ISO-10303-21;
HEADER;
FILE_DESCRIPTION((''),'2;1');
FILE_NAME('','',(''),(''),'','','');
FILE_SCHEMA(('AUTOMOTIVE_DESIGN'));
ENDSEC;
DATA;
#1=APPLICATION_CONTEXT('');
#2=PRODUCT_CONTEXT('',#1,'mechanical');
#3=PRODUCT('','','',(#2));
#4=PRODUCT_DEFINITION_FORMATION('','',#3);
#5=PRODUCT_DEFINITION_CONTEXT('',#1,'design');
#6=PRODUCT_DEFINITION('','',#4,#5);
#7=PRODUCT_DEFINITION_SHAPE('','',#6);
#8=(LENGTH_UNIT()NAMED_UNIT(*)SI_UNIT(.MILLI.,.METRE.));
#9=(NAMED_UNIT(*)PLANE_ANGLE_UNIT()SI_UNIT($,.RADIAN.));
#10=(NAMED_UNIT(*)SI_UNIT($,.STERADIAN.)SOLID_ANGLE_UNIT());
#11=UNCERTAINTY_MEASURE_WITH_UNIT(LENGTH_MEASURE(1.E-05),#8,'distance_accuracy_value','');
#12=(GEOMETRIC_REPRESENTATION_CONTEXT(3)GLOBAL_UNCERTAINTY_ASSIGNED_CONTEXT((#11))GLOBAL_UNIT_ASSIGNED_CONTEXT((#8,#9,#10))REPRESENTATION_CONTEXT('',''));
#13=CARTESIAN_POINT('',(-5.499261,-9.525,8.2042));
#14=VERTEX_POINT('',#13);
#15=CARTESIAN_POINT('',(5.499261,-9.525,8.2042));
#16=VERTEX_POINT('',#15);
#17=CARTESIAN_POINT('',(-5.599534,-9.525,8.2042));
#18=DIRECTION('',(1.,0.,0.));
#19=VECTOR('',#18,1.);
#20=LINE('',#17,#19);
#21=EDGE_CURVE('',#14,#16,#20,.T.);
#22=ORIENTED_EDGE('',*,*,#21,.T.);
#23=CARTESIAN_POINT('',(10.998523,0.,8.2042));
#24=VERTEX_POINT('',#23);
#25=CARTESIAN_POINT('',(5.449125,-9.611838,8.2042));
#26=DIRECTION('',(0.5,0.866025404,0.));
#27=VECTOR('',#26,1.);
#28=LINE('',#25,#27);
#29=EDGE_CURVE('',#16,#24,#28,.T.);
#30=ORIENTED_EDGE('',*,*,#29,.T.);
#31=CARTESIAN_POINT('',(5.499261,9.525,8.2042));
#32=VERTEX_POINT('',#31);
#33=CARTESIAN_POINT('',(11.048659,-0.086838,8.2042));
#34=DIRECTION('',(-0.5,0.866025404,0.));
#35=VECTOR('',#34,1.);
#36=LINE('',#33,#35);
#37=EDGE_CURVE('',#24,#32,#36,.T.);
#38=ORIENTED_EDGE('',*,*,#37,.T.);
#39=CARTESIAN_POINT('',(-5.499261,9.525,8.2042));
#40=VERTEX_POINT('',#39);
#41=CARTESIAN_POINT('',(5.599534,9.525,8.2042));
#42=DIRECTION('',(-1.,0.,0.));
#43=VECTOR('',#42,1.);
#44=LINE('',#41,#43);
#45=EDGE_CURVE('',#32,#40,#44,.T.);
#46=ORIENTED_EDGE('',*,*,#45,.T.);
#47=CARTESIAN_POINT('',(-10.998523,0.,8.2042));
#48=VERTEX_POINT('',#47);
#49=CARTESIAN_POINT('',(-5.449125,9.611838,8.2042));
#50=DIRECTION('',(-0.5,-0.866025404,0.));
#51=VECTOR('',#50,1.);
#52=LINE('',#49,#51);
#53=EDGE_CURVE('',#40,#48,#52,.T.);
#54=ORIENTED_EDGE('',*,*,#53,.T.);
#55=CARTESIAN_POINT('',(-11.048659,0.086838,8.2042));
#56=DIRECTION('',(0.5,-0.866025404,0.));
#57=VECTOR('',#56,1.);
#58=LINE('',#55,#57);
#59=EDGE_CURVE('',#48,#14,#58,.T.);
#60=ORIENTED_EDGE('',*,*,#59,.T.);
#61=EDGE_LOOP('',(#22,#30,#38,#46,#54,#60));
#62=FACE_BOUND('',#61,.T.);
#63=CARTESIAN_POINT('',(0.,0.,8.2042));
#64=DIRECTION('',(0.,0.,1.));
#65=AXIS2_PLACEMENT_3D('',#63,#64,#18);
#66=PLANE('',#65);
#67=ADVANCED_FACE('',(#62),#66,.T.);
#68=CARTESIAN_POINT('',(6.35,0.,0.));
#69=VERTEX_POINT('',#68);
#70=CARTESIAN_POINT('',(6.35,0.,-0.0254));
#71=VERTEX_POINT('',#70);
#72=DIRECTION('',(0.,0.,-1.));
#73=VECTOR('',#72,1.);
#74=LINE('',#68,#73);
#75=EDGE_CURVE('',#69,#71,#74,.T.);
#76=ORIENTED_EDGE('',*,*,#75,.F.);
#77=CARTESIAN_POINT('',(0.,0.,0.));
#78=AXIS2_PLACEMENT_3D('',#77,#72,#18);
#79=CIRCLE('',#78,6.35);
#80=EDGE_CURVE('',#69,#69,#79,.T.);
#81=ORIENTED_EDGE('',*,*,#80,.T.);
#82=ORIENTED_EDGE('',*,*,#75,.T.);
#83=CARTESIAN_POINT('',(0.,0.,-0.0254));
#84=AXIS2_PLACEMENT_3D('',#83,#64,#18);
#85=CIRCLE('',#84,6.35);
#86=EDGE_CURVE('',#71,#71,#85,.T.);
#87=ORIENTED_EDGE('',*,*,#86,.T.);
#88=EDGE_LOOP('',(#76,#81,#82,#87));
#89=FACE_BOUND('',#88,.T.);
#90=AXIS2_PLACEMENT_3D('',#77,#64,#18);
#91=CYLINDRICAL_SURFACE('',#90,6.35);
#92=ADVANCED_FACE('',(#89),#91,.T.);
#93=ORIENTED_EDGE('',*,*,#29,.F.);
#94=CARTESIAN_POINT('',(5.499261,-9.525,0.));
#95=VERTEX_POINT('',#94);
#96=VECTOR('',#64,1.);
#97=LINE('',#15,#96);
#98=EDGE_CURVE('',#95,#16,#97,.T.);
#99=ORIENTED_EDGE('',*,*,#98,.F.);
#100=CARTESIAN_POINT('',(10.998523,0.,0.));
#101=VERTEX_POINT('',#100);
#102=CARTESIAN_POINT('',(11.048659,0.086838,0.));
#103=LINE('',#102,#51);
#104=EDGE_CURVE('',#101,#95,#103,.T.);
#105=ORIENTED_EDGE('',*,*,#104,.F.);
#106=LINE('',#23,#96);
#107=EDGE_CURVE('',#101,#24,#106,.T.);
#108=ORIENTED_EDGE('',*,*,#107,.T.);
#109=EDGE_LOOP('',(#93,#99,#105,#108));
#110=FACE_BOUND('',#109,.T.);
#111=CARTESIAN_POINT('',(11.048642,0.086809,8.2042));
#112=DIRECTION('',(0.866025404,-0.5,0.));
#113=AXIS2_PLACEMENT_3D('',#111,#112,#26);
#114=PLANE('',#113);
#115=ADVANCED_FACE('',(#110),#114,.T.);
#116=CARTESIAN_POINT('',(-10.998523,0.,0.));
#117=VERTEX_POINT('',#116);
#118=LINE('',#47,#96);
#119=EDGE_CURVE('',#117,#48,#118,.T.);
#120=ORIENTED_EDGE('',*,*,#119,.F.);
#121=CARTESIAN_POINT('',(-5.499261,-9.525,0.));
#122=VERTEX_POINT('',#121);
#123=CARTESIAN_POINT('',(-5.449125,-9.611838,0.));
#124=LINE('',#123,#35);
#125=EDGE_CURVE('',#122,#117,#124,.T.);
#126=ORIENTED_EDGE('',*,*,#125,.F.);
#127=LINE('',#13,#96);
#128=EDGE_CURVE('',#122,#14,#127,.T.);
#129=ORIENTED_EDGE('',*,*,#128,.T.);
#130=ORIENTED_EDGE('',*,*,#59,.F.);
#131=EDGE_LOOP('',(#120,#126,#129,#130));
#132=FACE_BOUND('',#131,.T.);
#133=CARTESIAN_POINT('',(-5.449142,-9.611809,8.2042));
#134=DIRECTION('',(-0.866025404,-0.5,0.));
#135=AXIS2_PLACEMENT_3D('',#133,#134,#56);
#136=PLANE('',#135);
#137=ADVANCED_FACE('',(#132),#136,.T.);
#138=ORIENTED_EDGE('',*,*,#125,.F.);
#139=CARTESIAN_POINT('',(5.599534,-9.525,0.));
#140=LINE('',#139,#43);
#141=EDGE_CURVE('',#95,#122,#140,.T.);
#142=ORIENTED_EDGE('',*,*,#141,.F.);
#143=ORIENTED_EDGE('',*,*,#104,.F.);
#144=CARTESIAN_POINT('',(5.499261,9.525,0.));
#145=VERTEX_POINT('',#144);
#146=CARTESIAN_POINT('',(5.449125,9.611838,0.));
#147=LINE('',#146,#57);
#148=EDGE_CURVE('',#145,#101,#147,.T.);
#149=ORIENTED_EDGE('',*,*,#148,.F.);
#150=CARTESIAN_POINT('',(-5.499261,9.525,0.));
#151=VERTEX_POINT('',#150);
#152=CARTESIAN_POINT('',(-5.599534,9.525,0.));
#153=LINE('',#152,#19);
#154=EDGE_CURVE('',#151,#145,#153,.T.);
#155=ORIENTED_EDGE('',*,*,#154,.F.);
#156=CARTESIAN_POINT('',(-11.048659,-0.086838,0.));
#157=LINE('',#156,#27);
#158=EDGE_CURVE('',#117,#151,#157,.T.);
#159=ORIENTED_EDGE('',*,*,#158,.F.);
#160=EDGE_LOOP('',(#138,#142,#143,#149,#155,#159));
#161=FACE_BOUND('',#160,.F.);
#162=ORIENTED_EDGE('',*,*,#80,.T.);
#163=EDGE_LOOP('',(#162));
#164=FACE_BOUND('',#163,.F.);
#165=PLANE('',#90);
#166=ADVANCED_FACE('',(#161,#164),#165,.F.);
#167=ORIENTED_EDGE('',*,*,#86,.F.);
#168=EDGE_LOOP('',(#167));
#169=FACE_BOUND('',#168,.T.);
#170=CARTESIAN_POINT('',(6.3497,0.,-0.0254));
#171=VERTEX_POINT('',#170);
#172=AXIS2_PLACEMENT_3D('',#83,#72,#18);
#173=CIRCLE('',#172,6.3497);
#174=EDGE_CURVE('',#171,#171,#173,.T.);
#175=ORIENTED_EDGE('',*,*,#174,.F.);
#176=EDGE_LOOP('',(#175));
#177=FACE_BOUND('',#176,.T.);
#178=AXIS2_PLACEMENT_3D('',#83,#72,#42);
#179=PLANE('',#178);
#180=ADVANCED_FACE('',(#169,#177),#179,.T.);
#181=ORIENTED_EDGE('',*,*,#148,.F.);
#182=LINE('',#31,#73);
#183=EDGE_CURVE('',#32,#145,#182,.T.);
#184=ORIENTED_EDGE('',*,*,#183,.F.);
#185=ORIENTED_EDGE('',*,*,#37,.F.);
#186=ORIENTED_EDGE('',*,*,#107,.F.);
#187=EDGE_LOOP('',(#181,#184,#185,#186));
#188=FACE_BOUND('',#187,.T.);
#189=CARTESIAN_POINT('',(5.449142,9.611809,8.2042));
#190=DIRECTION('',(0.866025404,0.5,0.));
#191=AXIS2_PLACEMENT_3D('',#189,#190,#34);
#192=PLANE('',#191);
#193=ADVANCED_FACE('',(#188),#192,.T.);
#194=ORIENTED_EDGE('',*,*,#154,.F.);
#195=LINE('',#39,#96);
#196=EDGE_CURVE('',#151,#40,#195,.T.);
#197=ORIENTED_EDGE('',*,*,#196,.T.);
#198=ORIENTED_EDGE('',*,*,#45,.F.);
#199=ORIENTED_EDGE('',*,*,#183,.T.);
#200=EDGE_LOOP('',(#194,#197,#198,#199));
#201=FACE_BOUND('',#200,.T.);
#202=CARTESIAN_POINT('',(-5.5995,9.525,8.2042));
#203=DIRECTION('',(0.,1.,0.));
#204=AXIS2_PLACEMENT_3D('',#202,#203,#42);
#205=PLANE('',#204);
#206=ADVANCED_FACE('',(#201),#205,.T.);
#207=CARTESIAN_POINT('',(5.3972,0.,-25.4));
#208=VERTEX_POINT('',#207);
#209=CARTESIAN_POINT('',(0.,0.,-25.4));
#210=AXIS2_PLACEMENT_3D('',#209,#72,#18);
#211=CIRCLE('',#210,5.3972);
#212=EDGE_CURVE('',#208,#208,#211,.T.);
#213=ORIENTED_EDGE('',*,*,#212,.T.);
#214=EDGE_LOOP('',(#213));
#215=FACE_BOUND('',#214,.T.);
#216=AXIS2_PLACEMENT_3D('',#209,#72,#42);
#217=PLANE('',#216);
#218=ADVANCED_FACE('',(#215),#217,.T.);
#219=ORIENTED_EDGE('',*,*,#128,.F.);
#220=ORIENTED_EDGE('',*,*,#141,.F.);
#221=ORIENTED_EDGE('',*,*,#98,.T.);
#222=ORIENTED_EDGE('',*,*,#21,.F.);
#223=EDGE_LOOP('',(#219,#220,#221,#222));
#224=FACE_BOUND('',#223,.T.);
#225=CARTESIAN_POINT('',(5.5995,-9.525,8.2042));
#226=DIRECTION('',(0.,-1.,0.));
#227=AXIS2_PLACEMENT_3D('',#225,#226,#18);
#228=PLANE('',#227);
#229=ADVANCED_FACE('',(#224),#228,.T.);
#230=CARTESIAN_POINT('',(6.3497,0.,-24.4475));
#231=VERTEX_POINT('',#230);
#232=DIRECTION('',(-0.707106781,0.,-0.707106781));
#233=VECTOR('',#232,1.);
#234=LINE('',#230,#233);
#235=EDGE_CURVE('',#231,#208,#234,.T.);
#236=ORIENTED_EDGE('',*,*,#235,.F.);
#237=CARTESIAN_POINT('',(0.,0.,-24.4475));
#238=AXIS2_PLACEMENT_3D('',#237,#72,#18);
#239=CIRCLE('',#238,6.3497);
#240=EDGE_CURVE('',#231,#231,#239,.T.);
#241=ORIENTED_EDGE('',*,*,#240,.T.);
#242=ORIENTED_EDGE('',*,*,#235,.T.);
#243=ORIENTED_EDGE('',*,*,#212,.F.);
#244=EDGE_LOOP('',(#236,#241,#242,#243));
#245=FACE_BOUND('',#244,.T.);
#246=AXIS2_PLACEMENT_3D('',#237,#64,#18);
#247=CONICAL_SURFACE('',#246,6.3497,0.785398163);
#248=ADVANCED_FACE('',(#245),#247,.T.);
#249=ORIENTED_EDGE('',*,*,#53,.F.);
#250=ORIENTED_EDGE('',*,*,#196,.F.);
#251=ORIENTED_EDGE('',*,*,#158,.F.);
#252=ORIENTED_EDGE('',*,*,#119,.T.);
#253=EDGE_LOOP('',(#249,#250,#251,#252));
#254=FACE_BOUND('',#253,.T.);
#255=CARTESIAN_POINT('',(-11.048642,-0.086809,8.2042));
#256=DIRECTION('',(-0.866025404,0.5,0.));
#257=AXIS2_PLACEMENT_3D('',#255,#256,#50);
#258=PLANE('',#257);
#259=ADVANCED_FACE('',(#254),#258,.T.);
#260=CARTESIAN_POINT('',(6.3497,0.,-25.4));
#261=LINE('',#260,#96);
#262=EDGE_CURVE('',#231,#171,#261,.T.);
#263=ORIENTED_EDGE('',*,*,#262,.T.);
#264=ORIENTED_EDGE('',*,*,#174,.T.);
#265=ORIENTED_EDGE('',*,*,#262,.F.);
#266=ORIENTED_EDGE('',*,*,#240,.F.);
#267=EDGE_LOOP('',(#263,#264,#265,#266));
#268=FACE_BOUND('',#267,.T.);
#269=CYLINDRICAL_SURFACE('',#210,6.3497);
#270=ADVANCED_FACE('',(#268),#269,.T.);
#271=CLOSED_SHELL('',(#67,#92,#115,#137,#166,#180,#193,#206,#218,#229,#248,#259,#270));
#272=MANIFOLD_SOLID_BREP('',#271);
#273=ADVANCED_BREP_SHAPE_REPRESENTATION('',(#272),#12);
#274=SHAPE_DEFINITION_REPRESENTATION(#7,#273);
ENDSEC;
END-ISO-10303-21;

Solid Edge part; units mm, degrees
sketch "Sketch1" plane through (0, 0, 0) normal (0, 0, 1) x (1, 0, 0)
  circle A0 centre (0, 0) radius 11.049
  dimension "D1" = 22.098
extrude "Protrusion1" add sketch "Sketch1" along normal blind 8.2042
sketch "Sketch2" plane through (0, 0, 0) normal (0, 0, -1) x (1, 0, 0)
  circle A0 centre (0, 0) radius 6.35
extrude "Protrusion2" add sketch "Sketch2" along normal blind 25.4
sketch "Sketch3" plane through (0, 0, -25.4) normal (0, 0, -1) x (1, 0, 0)
  circle A0 centre (0, 0) radius 6.3497
extrude "Cutout1" cut sketch "Sketch3" against normal blind 25.3746 flip side to cut
chamfer "Chamfer_1" distance 0.9525 angle 45 1 edges at (-6.3497, 0, -25.4)
sketch "Sketch4" plane through (0, 0, 8.2042) normal (0, 0, 1) x (1, 0, 0)
  line L0 (-5.5995, 9.525) -> (5.5995, 9.525)
  dimension "D1" = 19.05
extrude "Cutout2" cut sketch "Sketch4" against normal up to next material side at (0, 9.575, 8.2042)
pattern_circular "Pattern1" count 6 over 360 about axis through (0, 0, 8.2042) along (0, 0, 1) of "Cutout2"
properties part number "147292"
